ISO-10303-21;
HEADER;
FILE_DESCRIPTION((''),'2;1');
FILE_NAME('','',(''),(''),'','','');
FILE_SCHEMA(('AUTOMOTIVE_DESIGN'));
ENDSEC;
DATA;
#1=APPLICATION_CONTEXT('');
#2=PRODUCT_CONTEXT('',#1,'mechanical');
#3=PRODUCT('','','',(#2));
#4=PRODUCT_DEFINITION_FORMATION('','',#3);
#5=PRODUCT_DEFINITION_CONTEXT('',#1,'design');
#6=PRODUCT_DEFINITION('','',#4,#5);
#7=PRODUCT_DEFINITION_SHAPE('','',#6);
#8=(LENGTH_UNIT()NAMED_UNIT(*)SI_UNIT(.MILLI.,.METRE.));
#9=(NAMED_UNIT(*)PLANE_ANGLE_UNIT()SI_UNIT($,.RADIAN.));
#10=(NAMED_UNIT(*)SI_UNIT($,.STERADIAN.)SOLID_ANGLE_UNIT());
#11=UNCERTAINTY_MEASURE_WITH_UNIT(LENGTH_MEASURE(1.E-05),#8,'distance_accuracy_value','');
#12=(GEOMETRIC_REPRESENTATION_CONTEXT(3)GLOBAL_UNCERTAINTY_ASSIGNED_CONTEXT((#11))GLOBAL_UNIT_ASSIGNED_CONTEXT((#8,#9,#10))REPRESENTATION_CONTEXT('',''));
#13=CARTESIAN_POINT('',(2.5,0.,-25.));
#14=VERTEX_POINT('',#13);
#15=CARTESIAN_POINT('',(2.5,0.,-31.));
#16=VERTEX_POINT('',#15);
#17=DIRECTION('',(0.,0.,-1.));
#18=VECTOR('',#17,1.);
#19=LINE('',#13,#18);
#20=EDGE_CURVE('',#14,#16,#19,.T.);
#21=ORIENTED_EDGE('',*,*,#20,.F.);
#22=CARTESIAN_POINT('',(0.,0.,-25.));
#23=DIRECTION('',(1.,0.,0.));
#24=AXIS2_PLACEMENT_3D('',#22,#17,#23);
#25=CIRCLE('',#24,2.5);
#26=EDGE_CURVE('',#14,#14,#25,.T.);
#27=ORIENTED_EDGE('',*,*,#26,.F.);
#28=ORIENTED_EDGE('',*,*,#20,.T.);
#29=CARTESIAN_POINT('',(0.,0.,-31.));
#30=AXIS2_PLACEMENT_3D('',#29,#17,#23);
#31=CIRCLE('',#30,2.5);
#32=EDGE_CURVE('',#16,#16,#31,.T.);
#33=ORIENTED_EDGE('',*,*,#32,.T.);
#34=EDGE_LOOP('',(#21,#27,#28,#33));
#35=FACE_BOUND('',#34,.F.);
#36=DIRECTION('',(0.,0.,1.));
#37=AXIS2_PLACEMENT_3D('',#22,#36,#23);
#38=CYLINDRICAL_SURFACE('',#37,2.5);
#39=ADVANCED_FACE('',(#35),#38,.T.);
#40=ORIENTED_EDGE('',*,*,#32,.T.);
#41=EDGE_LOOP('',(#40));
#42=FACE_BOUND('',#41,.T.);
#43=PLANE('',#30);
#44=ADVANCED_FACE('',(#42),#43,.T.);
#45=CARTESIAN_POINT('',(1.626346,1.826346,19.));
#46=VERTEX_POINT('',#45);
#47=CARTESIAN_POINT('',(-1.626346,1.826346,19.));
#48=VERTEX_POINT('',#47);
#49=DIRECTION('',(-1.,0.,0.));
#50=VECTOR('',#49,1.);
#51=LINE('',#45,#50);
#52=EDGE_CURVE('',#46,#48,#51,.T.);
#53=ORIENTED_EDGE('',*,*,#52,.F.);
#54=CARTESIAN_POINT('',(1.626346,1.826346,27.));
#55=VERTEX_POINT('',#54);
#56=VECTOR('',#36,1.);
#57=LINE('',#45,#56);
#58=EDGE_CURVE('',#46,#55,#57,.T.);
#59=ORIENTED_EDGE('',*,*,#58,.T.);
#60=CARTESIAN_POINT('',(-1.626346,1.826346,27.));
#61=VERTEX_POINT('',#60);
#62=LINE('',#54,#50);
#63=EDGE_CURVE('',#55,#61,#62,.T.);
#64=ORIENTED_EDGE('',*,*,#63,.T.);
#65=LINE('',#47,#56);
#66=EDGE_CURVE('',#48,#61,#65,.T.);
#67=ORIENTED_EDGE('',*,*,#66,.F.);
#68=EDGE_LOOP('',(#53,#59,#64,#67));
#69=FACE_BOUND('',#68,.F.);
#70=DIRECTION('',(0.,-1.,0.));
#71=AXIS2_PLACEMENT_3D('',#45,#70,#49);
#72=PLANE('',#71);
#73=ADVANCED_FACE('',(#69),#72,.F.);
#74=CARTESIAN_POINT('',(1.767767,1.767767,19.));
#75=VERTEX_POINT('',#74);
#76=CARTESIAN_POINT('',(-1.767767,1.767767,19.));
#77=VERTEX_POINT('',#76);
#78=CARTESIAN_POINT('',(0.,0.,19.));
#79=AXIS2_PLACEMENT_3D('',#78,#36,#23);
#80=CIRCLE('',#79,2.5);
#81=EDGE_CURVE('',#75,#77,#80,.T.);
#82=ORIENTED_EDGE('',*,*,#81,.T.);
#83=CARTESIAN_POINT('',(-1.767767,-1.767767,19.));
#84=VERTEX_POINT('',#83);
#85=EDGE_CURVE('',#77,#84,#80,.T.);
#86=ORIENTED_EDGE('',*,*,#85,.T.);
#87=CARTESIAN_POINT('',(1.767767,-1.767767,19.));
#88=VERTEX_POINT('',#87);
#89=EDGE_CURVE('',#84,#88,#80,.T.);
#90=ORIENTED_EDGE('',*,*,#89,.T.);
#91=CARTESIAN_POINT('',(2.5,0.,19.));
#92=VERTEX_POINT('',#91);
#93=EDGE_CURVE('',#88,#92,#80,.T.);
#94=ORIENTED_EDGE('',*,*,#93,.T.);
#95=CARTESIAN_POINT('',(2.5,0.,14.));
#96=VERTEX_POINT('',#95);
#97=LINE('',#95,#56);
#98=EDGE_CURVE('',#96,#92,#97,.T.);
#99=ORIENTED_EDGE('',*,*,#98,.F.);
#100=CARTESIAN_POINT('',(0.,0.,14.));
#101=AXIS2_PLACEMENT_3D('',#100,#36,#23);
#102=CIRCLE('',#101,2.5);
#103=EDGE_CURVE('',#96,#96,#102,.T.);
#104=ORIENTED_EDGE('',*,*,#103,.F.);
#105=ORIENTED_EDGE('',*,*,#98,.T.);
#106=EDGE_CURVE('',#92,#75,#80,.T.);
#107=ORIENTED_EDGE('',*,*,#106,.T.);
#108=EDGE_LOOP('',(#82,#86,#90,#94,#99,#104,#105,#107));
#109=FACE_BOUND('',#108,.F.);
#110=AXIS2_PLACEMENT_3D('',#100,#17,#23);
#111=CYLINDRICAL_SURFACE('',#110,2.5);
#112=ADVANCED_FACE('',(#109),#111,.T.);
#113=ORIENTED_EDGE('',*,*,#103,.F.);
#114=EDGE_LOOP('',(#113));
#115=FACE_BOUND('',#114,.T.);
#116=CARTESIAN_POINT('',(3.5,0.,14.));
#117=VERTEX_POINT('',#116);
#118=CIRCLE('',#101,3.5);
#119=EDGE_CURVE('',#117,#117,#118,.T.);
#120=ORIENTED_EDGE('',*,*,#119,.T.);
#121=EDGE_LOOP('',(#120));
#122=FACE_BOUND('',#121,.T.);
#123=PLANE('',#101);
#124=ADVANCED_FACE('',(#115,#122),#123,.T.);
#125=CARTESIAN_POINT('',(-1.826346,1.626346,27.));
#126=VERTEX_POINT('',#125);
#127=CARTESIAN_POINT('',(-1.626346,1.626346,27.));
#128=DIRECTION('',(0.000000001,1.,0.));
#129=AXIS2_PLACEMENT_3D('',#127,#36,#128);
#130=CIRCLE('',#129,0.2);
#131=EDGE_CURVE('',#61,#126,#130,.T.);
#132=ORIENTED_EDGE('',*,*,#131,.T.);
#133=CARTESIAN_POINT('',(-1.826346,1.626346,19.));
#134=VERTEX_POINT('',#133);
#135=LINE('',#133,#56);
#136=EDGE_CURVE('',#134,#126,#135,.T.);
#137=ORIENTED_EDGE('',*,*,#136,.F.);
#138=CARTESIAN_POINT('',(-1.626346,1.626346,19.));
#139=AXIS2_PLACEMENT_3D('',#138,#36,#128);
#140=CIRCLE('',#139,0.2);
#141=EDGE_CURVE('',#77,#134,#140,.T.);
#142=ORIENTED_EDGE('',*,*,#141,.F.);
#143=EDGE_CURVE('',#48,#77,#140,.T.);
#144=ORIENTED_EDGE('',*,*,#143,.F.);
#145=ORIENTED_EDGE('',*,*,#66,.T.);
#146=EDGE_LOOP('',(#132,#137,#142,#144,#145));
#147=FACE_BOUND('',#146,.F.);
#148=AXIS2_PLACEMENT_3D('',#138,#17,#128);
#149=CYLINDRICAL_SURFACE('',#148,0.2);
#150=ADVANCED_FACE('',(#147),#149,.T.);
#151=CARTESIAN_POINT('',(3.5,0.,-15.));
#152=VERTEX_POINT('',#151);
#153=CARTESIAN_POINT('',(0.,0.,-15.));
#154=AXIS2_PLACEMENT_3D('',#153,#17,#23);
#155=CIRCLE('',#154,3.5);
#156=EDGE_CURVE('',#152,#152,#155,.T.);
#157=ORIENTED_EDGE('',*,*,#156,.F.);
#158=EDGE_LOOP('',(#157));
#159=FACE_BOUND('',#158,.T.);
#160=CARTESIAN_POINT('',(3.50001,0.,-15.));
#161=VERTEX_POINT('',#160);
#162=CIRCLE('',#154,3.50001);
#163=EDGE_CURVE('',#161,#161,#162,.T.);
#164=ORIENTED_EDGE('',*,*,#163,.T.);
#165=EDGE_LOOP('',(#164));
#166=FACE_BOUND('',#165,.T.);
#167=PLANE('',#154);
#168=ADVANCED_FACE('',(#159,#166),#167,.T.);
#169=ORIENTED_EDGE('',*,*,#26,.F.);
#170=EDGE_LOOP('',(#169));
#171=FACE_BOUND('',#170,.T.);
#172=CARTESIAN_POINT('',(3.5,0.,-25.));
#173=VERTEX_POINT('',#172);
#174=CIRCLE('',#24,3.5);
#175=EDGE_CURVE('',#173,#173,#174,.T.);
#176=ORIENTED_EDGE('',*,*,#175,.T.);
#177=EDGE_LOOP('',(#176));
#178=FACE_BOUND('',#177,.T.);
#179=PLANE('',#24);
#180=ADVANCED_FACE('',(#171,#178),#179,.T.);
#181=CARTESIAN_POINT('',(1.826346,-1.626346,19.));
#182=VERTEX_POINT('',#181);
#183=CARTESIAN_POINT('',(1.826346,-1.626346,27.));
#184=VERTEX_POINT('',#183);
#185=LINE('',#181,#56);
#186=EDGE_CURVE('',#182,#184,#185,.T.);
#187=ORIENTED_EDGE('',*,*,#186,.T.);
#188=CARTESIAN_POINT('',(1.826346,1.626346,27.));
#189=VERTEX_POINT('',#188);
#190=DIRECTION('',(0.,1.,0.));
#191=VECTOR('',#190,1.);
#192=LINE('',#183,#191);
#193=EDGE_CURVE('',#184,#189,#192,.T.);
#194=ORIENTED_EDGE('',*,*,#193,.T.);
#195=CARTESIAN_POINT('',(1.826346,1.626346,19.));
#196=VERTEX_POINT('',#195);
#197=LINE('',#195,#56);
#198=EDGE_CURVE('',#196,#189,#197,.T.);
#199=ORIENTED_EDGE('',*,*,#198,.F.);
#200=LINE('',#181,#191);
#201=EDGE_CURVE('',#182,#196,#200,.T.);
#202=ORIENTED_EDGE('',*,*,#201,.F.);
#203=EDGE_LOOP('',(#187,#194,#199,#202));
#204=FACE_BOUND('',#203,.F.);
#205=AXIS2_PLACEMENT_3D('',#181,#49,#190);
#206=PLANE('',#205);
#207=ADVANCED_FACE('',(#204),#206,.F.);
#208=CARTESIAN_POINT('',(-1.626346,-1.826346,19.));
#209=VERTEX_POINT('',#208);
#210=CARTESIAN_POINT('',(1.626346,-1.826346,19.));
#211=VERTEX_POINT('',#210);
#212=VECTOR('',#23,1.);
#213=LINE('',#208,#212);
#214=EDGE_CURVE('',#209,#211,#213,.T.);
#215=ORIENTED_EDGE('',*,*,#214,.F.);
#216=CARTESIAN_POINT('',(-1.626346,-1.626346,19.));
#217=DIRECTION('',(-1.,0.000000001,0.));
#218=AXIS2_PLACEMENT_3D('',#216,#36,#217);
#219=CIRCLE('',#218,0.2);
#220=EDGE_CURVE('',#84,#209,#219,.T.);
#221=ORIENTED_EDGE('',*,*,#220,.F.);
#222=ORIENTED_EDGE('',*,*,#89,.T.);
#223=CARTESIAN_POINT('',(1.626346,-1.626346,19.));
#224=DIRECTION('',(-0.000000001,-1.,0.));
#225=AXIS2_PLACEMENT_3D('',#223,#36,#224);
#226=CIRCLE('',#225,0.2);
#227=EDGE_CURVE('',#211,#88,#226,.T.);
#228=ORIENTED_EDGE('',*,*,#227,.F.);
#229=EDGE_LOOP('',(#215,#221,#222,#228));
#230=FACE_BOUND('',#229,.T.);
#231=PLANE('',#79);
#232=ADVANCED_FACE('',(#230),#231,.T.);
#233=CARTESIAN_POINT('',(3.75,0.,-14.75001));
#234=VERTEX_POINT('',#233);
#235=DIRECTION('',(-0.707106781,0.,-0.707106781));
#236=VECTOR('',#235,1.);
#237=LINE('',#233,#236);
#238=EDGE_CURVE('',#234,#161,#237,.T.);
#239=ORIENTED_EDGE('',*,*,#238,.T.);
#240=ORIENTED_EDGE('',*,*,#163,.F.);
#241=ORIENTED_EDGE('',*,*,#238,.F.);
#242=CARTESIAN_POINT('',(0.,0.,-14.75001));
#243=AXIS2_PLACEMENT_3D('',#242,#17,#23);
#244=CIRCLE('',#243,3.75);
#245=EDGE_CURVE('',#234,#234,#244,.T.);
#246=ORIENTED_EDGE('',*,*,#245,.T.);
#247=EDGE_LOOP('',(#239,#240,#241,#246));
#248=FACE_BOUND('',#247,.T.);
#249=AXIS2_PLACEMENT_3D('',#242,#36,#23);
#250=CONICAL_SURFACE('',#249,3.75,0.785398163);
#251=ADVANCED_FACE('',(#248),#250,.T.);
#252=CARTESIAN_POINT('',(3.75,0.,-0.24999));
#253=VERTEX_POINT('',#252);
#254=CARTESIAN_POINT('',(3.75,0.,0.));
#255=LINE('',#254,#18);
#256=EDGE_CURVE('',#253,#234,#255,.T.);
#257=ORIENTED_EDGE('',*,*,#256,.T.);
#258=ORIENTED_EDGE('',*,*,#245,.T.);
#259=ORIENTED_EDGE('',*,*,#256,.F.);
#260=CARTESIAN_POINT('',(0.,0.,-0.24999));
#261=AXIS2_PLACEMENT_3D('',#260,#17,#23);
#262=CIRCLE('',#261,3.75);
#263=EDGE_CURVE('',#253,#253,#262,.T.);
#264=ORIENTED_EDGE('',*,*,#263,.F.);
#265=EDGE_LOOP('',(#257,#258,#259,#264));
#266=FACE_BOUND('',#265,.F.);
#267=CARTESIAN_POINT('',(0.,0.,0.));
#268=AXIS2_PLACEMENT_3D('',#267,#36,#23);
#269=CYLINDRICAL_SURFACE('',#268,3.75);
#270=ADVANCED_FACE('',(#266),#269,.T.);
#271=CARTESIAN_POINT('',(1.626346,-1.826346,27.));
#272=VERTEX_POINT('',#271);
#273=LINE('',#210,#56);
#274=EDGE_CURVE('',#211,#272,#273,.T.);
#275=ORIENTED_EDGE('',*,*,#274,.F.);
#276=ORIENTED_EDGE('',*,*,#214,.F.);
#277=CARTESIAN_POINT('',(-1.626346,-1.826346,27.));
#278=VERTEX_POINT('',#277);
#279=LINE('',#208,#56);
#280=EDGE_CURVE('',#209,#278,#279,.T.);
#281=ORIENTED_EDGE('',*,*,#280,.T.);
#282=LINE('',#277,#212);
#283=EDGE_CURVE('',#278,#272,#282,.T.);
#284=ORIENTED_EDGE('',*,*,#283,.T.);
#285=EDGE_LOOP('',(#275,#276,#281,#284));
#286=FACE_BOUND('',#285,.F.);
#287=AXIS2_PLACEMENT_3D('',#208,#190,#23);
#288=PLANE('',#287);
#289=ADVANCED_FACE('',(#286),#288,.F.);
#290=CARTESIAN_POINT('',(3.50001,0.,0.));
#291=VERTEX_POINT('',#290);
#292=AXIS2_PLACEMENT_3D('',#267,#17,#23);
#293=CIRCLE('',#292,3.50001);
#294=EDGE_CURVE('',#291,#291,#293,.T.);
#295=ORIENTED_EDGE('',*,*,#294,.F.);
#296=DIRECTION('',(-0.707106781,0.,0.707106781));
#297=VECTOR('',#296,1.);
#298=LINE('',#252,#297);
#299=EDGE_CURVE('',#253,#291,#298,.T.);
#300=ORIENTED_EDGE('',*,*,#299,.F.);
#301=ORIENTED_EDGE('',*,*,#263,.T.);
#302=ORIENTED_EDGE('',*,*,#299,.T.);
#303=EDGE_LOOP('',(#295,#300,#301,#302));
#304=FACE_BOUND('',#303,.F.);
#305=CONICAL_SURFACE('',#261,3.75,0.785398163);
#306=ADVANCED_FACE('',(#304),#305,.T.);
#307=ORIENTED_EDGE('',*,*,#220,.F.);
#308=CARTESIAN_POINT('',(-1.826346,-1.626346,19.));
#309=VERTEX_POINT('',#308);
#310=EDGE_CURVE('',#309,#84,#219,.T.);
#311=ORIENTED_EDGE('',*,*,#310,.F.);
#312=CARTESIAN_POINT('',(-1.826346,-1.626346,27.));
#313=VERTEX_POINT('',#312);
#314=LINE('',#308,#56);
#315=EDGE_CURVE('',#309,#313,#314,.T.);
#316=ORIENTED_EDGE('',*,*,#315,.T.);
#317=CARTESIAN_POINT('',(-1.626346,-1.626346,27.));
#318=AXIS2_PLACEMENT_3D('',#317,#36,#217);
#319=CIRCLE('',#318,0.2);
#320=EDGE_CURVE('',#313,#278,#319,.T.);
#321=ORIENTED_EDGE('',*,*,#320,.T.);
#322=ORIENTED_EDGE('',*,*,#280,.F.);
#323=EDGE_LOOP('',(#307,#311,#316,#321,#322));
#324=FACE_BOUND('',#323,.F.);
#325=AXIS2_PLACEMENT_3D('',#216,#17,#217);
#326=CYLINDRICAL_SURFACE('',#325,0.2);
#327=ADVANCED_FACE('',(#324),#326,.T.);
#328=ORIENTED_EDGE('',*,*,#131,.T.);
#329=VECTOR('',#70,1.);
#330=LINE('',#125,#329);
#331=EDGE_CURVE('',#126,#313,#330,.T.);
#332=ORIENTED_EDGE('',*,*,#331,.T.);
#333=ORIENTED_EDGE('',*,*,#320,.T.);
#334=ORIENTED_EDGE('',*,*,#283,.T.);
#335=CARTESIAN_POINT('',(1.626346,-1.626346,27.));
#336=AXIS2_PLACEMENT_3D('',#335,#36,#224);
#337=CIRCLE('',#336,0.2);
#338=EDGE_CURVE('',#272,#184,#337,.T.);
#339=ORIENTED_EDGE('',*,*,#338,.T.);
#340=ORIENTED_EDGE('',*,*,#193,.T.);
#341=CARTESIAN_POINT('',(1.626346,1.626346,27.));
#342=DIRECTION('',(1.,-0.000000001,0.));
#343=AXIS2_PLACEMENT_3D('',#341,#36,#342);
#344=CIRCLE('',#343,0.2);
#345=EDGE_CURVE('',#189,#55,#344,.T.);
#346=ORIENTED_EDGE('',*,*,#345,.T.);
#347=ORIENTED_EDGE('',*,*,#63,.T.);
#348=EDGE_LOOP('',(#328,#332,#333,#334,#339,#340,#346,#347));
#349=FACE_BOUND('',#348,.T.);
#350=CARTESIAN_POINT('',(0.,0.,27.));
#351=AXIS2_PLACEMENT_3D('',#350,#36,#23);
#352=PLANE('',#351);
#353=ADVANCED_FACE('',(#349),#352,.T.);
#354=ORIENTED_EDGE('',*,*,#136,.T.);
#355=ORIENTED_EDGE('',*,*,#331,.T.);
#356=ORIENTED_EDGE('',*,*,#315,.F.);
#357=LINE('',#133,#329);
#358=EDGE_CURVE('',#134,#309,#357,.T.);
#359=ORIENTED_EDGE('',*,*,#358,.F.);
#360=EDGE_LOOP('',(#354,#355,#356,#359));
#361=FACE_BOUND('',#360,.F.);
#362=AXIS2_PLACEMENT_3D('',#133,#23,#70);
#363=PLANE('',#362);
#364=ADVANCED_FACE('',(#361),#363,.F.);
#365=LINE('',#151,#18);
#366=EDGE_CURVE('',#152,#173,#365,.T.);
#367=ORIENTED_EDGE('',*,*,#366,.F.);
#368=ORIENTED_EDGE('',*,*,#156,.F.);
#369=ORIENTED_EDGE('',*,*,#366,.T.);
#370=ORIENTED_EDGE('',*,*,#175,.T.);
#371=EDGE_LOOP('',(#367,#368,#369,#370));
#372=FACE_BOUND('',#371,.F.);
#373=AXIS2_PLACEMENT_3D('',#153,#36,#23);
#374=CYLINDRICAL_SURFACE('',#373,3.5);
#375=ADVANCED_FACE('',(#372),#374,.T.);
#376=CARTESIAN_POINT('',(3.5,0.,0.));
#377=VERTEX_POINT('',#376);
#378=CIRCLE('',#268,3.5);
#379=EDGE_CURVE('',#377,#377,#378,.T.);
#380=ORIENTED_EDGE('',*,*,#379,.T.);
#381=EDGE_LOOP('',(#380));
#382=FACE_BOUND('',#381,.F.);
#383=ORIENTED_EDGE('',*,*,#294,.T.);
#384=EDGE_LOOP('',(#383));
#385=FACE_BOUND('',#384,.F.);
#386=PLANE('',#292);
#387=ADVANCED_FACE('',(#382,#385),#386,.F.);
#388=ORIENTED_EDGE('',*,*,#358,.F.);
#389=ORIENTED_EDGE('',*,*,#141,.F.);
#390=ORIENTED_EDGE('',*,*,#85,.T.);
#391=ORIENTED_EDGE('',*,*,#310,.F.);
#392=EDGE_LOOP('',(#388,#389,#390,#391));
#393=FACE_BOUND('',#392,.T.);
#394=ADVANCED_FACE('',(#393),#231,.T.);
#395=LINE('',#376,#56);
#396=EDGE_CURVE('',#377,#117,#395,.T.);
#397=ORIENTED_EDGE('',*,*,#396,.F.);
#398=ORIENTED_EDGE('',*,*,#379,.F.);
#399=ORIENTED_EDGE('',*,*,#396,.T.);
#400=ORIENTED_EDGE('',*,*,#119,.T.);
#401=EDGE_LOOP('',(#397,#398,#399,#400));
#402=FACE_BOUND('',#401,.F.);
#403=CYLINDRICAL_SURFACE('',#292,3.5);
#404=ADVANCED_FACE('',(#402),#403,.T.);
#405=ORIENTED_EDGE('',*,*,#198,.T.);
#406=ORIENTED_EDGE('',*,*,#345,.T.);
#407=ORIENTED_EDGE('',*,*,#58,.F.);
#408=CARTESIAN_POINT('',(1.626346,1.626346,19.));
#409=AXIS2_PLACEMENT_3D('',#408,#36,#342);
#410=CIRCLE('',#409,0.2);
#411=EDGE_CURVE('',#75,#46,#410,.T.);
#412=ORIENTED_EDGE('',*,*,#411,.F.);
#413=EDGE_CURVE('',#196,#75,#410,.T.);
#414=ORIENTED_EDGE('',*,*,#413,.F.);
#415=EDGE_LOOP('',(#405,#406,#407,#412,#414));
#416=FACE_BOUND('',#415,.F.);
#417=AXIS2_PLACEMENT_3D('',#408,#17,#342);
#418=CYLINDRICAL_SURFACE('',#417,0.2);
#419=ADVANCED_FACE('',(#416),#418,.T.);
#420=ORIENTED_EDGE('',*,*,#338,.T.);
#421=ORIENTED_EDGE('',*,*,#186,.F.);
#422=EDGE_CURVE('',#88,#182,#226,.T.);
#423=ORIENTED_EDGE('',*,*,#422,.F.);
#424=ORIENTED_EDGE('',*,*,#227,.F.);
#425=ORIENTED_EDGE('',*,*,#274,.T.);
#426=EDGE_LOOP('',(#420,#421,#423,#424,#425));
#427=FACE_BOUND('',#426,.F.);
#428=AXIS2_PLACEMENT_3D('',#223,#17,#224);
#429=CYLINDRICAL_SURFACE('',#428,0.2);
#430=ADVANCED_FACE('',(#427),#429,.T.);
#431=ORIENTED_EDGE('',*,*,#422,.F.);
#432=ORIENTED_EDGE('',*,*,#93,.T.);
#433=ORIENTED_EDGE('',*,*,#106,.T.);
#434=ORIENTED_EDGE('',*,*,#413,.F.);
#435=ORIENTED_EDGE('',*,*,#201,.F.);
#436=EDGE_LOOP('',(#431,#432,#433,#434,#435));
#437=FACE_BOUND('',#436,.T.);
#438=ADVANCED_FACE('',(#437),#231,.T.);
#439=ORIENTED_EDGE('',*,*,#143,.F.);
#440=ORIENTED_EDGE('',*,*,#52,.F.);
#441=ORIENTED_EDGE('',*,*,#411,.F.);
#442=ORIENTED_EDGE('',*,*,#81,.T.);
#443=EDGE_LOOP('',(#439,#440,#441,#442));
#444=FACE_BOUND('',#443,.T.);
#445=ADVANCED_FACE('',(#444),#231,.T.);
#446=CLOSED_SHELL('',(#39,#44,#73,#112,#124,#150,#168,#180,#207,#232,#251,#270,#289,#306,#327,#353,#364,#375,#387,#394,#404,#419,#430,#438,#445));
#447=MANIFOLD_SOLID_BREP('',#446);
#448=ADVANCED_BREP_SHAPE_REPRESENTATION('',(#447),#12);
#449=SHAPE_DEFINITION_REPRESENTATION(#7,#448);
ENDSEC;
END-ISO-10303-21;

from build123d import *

# Parameters (mm, degrees)
F0_R      = 3.5
F1_DEPTH  = 14
F2_R      = 2.5
F3_DEPTH  = 5
F5_DEPTH  = 8
F6_R      = 3.75
F7_DEPTH  = 15
F8_R      = 3.5
F9_DEPTH  = 10
F10_SIZE  = 0.24999
F11_R     = 2.5
F12_DEPTH = 6


# Not quite as in the source:
# - a fillet or chamfer is up to 0.001 mm smaller than in the source, because OpenCascade refuses the exact size


with BuildPart() as f1:
    # F0 (on Top) → F1 (new body)
    with BuildSketch(Plane.XY):
        Circle(F0_R)
    extrude(amount=F1_DEPTH)

    # F2 (on face) → F3 (join)
    with BuildSketch(Plane.XY.offset(14)):
        Circle(F2_R)
    extrude(amount=F3_DEPTH)

    # F4 (on face) → F5 (join)
    with BuildSketch(Plane.XY.offset(19)):
        with BuildLine():
            ThreePointArc((1.8263455967, 1.6263455967), (1.767766953, 1.767766953), (1.6263455967, 1.8263455967))
            Line((1.6263455967, 1.8263455967), (-1.6263455967, 1.8263455967))
            ThreePointArc((-1.6263455967, 1.8263455967), (-1.767766953, 1.767766953), (-1.8263455967, 1.6263455967))
            Line((-1.8263455967, 1.6263455967), (-1.8263455967, -1.6263455967))
            ThreePointArc((-1.8263455967, -1.6263455967), (-1.767766953, -1.767766953), (-1.6263455967, -1.8263455967))
            Line((-1.6263455967, -1.8263455967), (1.6263455967, -1.8263455967))
            ThreePointArc((1.6263455967, -1.8263455967), (1.767766953, -1.767766953), (1.8263455967, -1.6263455967))
            Line((1.8263455967, -1.6263455967), (1.8263455967, 1.6263455967))
        make_face()
    extrude(amount=F5_DEPTH)

    # F6 (on face) → F7 (join)
    with BuildSketch(Plane(origin=(0, 0, 0), x_dir=(1, 0, 0), z_dir=(0, 0, -1))):
        Circle(F6_R)
    extrude(amount=F7_DEPTH)

    # F8 (on face) → F9 (join)
    with BuildSketch(Plane(origin=(0, 0, -15), x_dir=(1, 0, 0), z_dir=(0, 0, -1))):
        Circle(F8_R)
    extrude(amount=F9_DEPTH)

    # F10 (size 0.25 in the source; OpenCascade refuses exactly that, so slightly less here)
    f10_edges = [f1.edges().sort_by_distance(p)[0] for p in [
        (-3.75, 0, 0),
        (-3.75, 0, -15),
    ]]
    chamfer(f10_edges, length=F10_SIZE)

    # F11 (on face) → F12 (join)
    with BuildSketch(Plane(origin=(0, 0, -25), x_dir=(1, 0, 0), z_dir=(0, 0, -1))):
        Circle(F11_R)
    extrude(amount=F12_DEPTH)


solid = f1.part
